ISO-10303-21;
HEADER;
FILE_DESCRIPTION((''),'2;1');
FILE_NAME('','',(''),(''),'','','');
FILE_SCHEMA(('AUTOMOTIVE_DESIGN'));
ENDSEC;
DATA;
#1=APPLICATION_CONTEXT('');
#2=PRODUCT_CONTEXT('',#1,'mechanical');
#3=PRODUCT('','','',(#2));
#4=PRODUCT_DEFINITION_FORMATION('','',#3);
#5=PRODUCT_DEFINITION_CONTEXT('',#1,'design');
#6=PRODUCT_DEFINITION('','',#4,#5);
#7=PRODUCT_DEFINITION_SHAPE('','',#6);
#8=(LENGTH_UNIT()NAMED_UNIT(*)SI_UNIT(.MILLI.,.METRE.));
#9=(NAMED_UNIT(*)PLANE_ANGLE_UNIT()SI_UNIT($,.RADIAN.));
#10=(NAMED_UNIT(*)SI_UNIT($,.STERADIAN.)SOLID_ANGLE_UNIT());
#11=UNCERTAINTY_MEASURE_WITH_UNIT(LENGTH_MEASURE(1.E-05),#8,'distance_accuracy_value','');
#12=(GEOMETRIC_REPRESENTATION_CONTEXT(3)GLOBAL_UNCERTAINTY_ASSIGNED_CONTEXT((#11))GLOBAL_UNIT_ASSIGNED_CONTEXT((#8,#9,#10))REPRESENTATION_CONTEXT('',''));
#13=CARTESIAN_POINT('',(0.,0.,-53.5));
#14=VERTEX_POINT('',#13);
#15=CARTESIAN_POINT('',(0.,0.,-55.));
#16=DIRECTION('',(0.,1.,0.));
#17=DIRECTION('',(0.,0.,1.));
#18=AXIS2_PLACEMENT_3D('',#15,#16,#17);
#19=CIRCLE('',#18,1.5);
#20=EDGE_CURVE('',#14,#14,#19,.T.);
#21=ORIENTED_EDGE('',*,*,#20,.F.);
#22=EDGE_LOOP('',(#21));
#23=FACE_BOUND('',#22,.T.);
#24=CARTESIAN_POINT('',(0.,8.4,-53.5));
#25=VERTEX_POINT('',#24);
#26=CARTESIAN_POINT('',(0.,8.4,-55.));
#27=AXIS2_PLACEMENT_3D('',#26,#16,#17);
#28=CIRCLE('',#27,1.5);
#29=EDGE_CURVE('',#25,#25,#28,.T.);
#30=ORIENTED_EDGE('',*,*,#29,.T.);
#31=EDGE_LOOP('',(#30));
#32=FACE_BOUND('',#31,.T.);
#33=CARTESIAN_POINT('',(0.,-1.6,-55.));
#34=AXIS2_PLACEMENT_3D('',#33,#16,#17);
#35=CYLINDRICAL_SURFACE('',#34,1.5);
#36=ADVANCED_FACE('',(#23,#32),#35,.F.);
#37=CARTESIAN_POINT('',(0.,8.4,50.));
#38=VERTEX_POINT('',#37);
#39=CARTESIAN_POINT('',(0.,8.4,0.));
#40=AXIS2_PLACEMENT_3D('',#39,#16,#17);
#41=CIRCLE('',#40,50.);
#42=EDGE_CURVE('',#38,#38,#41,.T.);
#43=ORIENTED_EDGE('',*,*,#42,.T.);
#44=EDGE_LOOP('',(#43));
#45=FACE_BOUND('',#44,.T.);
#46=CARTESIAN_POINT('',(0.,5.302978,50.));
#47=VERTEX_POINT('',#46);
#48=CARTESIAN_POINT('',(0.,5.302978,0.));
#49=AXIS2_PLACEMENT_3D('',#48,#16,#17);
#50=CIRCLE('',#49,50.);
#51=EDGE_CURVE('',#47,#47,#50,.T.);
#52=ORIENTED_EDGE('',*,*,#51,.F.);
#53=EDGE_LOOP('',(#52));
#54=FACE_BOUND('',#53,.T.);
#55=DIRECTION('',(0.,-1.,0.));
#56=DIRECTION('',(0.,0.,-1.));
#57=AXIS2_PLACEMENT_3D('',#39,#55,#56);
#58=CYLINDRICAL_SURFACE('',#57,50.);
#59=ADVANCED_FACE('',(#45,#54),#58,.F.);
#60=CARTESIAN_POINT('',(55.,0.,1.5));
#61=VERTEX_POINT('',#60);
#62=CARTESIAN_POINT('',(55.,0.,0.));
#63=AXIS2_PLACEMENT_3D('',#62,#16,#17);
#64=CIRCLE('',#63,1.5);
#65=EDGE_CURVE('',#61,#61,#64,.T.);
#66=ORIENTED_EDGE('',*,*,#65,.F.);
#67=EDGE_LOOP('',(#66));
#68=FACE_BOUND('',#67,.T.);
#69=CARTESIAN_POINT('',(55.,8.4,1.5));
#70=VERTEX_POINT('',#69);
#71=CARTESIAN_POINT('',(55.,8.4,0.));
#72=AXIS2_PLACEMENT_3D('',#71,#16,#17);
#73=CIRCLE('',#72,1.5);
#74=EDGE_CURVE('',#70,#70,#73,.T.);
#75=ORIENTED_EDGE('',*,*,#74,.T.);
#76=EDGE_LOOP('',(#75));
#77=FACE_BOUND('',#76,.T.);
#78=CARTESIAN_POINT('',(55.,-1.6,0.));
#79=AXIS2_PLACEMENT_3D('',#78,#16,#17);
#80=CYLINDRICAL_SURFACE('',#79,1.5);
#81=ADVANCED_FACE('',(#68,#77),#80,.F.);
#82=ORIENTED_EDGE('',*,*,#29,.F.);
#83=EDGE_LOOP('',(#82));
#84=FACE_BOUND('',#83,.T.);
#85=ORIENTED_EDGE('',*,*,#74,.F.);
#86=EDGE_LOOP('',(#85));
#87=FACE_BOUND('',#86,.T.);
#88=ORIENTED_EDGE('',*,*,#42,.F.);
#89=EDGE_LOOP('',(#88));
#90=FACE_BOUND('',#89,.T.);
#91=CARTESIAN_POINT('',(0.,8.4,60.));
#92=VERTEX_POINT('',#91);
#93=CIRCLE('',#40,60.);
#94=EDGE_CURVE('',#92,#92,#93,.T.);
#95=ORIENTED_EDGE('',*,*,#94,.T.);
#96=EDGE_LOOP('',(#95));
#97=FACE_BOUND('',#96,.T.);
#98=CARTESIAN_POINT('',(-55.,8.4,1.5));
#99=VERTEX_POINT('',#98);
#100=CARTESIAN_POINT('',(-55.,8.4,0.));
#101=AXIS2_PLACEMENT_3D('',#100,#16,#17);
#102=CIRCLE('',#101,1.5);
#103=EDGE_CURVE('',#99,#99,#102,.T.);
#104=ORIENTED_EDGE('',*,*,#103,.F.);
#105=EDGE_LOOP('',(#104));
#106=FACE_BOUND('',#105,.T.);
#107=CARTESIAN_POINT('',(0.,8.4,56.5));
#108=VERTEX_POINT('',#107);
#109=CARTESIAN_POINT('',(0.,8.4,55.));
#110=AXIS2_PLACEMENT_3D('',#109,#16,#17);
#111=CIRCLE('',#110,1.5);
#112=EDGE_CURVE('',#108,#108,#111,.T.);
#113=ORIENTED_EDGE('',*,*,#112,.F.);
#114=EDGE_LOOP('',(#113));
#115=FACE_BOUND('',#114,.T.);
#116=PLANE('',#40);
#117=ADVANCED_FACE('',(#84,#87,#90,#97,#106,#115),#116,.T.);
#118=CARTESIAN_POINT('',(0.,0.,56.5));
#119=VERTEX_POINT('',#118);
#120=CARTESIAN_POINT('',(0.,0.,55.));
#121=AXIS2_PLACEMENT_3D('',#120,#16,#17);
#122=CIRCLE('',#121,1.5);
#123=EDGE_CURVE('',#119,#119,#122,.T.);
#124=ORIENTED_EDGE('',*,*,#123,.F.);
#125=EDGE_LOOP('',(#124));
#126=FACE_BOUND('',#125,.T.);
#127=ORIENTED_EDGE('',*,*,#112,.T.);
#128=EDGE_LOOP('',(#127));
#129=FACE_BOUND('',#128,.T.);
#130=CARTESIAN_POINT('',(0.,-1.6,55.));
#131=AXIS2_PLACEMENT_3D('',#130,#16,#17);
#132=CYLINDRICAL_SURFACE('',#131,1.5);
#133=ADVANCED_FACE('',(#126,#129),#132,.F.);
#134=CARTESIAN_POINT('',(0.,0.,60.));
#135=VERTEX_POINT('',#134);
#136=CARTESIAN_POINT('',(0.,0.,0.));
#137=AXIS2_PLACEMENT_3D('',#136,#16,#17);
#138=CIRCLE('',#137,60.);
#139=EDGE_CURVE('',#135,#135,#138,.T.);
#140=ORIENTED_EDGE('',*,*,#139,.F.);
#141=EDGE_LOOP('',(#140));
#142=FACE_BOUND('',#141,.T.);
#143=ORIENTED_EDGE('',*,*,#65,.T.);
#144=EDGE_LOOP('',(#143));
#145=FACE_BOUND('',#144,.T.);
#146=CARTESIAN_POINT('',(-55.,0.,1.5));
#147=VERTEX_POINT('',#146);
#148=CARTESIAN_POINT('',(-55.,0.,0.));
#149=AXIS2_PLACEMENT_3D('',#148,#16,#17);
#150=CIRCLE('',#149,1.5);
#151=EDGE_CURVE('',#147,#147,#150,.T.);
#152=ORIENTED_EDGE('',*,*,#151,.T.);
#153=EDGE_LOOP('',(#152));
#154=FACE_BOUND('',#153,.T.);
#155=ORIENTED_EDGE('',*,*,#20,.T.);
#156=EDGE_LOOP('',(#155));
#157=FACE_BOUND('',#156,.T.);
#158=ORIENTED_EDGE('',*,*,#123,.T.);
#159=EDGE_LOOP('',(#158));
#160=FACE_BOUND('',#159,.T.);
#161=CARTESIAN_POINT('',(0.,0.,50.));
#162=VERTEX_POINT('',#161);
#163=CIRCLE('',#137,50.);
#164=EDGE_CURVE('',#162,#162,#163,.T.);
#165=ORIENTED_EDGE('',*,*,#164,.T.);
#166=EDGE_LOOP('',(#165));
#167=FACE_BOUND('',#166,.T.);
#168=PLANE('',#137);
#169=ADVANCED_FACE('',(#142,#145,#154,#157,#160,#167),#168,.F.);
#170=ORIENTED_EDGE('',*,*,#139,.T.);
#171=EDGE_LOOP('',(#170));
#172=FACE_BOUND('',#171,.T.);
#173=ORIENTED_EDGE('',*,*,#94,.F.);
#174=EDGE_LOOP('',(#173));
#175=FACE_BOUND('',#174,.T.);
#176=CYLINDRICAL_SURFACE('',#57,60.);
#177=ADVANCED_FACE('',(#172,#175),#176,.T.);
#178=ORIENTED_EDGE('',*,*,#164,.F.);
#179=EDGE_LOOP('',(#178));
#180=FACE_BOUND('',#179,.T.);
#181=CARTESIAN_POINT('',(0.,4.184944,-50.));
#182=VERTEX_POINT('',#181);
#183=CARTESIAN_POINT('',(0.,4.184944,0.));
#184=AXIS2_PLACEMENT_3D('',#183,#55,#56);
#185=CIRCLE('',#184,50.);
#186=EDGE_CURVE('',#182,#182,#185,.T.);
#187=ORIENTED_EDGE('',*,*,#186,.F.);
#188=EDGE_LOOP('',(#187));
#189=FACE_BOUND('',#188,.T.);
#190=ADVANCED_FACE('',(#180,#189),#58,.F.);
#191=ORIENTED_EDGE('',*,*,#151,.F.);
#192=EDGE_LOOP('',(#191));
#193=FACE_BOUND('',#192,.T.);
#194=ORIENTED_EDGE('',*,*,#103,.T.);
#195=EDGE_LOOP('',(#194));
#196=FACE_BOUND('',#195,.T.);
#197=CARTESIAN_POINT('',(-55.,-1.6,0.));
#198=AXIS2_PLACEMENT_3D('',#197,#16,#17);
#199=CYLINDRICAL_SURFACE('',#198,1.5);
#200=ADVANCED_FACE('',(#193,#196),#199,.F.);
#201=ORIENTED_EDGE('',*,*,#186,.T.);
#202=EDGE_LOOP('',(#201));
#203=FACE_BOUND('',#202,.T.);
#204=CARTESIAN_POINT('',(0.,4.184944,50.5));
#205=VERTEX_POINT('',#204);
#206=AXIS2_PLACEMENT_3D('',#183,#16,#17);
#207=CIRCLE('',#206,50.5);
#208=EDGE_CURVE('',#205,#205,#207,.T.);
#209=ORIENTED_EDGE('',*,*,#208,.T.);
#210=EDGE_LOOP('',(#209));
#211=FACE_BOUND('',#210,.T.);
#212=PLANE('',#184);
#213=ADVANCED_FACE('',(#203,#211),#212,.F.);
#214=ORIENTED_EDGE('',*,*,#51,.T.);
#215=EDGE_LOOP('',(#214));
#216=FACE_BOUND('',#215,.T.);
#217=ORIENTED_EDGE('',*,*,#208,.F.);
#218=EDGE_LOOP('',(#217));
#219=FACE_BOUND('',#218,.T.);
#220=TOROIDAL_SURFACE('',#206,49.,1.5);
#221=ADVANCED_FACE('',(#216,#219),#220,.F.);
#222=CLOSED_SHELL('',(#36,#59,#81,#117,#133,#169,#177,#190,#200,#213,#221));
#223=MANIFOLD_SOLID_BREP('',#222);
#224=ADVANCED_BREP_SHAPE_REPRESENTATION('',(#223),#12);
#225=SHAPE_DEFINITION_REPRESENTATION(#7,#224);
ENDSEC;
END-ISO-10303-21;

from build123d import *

# Parameters (mm, degrees)
SKETCH_1_R          = 60
SKETCH_1_R_2        = 50
EXTRUDE_2_DEPTH     = 8.4
SKETCH_5_R          = 1.5
CUT_EXTRUDE_1_DEPTH = 10


with BuildPart() as part:
    # 草图1 → 凸台-拉伸2 (new body)
    with BuildSketch(Plane(origin=(0, 0, 0), x_dir=(1, 0, 0), z_dir=(0, 1, 0))):
        Circle(SKETCH_1_R)
        Circle(SKETCH_1_R_2, mode=Mode.SUBTRACT)
    extrude(amount=EXTRUDE_2_DEPTH)

    # 草图4 → 切除-旋转1 (revolve, cut)
    with BuildSketch(Plane.XY):
        with BuildLine():
            ThreePointArc((-50, 5.302978388), (-50.369306394, 4.797316835), (-50.5, 4.184944399))
            Line((-50.5, 4.184944399), (0, 4.184944399))
            Line((0, 4.184944399), (0, 5.302978388))
            Line((0, 5.302978388), (-50, 5.302978388))
        make_face()
    revolve(axis=Axis((0, 5.302978388, 0), (0, -1, 0)), mode=Mode.SUBTRACT)

    # 草图5 → 切除-拉伸1 (cut)
    with BuildSketch(Plane(origin=(0, 8.4, 0), x_dir=(1, 0, 0), z_dir=(0, 1, 0))):
        with Locations((0, 55)):
            Circle(SKETCH_5_R)
        with Locations((55, 0)):
            Circle(SKETCH_5_R)
        with Locations((-55, 0)):
            Circle(SKETCH_5_R)
        with Locations((0, -55)):
            Circle(SKETCH_5_R)
    extrude(amount=-CUT_EXTRUDE_1_DEPTH, mode=Mode.SUBTRACT)


solid = part.part
